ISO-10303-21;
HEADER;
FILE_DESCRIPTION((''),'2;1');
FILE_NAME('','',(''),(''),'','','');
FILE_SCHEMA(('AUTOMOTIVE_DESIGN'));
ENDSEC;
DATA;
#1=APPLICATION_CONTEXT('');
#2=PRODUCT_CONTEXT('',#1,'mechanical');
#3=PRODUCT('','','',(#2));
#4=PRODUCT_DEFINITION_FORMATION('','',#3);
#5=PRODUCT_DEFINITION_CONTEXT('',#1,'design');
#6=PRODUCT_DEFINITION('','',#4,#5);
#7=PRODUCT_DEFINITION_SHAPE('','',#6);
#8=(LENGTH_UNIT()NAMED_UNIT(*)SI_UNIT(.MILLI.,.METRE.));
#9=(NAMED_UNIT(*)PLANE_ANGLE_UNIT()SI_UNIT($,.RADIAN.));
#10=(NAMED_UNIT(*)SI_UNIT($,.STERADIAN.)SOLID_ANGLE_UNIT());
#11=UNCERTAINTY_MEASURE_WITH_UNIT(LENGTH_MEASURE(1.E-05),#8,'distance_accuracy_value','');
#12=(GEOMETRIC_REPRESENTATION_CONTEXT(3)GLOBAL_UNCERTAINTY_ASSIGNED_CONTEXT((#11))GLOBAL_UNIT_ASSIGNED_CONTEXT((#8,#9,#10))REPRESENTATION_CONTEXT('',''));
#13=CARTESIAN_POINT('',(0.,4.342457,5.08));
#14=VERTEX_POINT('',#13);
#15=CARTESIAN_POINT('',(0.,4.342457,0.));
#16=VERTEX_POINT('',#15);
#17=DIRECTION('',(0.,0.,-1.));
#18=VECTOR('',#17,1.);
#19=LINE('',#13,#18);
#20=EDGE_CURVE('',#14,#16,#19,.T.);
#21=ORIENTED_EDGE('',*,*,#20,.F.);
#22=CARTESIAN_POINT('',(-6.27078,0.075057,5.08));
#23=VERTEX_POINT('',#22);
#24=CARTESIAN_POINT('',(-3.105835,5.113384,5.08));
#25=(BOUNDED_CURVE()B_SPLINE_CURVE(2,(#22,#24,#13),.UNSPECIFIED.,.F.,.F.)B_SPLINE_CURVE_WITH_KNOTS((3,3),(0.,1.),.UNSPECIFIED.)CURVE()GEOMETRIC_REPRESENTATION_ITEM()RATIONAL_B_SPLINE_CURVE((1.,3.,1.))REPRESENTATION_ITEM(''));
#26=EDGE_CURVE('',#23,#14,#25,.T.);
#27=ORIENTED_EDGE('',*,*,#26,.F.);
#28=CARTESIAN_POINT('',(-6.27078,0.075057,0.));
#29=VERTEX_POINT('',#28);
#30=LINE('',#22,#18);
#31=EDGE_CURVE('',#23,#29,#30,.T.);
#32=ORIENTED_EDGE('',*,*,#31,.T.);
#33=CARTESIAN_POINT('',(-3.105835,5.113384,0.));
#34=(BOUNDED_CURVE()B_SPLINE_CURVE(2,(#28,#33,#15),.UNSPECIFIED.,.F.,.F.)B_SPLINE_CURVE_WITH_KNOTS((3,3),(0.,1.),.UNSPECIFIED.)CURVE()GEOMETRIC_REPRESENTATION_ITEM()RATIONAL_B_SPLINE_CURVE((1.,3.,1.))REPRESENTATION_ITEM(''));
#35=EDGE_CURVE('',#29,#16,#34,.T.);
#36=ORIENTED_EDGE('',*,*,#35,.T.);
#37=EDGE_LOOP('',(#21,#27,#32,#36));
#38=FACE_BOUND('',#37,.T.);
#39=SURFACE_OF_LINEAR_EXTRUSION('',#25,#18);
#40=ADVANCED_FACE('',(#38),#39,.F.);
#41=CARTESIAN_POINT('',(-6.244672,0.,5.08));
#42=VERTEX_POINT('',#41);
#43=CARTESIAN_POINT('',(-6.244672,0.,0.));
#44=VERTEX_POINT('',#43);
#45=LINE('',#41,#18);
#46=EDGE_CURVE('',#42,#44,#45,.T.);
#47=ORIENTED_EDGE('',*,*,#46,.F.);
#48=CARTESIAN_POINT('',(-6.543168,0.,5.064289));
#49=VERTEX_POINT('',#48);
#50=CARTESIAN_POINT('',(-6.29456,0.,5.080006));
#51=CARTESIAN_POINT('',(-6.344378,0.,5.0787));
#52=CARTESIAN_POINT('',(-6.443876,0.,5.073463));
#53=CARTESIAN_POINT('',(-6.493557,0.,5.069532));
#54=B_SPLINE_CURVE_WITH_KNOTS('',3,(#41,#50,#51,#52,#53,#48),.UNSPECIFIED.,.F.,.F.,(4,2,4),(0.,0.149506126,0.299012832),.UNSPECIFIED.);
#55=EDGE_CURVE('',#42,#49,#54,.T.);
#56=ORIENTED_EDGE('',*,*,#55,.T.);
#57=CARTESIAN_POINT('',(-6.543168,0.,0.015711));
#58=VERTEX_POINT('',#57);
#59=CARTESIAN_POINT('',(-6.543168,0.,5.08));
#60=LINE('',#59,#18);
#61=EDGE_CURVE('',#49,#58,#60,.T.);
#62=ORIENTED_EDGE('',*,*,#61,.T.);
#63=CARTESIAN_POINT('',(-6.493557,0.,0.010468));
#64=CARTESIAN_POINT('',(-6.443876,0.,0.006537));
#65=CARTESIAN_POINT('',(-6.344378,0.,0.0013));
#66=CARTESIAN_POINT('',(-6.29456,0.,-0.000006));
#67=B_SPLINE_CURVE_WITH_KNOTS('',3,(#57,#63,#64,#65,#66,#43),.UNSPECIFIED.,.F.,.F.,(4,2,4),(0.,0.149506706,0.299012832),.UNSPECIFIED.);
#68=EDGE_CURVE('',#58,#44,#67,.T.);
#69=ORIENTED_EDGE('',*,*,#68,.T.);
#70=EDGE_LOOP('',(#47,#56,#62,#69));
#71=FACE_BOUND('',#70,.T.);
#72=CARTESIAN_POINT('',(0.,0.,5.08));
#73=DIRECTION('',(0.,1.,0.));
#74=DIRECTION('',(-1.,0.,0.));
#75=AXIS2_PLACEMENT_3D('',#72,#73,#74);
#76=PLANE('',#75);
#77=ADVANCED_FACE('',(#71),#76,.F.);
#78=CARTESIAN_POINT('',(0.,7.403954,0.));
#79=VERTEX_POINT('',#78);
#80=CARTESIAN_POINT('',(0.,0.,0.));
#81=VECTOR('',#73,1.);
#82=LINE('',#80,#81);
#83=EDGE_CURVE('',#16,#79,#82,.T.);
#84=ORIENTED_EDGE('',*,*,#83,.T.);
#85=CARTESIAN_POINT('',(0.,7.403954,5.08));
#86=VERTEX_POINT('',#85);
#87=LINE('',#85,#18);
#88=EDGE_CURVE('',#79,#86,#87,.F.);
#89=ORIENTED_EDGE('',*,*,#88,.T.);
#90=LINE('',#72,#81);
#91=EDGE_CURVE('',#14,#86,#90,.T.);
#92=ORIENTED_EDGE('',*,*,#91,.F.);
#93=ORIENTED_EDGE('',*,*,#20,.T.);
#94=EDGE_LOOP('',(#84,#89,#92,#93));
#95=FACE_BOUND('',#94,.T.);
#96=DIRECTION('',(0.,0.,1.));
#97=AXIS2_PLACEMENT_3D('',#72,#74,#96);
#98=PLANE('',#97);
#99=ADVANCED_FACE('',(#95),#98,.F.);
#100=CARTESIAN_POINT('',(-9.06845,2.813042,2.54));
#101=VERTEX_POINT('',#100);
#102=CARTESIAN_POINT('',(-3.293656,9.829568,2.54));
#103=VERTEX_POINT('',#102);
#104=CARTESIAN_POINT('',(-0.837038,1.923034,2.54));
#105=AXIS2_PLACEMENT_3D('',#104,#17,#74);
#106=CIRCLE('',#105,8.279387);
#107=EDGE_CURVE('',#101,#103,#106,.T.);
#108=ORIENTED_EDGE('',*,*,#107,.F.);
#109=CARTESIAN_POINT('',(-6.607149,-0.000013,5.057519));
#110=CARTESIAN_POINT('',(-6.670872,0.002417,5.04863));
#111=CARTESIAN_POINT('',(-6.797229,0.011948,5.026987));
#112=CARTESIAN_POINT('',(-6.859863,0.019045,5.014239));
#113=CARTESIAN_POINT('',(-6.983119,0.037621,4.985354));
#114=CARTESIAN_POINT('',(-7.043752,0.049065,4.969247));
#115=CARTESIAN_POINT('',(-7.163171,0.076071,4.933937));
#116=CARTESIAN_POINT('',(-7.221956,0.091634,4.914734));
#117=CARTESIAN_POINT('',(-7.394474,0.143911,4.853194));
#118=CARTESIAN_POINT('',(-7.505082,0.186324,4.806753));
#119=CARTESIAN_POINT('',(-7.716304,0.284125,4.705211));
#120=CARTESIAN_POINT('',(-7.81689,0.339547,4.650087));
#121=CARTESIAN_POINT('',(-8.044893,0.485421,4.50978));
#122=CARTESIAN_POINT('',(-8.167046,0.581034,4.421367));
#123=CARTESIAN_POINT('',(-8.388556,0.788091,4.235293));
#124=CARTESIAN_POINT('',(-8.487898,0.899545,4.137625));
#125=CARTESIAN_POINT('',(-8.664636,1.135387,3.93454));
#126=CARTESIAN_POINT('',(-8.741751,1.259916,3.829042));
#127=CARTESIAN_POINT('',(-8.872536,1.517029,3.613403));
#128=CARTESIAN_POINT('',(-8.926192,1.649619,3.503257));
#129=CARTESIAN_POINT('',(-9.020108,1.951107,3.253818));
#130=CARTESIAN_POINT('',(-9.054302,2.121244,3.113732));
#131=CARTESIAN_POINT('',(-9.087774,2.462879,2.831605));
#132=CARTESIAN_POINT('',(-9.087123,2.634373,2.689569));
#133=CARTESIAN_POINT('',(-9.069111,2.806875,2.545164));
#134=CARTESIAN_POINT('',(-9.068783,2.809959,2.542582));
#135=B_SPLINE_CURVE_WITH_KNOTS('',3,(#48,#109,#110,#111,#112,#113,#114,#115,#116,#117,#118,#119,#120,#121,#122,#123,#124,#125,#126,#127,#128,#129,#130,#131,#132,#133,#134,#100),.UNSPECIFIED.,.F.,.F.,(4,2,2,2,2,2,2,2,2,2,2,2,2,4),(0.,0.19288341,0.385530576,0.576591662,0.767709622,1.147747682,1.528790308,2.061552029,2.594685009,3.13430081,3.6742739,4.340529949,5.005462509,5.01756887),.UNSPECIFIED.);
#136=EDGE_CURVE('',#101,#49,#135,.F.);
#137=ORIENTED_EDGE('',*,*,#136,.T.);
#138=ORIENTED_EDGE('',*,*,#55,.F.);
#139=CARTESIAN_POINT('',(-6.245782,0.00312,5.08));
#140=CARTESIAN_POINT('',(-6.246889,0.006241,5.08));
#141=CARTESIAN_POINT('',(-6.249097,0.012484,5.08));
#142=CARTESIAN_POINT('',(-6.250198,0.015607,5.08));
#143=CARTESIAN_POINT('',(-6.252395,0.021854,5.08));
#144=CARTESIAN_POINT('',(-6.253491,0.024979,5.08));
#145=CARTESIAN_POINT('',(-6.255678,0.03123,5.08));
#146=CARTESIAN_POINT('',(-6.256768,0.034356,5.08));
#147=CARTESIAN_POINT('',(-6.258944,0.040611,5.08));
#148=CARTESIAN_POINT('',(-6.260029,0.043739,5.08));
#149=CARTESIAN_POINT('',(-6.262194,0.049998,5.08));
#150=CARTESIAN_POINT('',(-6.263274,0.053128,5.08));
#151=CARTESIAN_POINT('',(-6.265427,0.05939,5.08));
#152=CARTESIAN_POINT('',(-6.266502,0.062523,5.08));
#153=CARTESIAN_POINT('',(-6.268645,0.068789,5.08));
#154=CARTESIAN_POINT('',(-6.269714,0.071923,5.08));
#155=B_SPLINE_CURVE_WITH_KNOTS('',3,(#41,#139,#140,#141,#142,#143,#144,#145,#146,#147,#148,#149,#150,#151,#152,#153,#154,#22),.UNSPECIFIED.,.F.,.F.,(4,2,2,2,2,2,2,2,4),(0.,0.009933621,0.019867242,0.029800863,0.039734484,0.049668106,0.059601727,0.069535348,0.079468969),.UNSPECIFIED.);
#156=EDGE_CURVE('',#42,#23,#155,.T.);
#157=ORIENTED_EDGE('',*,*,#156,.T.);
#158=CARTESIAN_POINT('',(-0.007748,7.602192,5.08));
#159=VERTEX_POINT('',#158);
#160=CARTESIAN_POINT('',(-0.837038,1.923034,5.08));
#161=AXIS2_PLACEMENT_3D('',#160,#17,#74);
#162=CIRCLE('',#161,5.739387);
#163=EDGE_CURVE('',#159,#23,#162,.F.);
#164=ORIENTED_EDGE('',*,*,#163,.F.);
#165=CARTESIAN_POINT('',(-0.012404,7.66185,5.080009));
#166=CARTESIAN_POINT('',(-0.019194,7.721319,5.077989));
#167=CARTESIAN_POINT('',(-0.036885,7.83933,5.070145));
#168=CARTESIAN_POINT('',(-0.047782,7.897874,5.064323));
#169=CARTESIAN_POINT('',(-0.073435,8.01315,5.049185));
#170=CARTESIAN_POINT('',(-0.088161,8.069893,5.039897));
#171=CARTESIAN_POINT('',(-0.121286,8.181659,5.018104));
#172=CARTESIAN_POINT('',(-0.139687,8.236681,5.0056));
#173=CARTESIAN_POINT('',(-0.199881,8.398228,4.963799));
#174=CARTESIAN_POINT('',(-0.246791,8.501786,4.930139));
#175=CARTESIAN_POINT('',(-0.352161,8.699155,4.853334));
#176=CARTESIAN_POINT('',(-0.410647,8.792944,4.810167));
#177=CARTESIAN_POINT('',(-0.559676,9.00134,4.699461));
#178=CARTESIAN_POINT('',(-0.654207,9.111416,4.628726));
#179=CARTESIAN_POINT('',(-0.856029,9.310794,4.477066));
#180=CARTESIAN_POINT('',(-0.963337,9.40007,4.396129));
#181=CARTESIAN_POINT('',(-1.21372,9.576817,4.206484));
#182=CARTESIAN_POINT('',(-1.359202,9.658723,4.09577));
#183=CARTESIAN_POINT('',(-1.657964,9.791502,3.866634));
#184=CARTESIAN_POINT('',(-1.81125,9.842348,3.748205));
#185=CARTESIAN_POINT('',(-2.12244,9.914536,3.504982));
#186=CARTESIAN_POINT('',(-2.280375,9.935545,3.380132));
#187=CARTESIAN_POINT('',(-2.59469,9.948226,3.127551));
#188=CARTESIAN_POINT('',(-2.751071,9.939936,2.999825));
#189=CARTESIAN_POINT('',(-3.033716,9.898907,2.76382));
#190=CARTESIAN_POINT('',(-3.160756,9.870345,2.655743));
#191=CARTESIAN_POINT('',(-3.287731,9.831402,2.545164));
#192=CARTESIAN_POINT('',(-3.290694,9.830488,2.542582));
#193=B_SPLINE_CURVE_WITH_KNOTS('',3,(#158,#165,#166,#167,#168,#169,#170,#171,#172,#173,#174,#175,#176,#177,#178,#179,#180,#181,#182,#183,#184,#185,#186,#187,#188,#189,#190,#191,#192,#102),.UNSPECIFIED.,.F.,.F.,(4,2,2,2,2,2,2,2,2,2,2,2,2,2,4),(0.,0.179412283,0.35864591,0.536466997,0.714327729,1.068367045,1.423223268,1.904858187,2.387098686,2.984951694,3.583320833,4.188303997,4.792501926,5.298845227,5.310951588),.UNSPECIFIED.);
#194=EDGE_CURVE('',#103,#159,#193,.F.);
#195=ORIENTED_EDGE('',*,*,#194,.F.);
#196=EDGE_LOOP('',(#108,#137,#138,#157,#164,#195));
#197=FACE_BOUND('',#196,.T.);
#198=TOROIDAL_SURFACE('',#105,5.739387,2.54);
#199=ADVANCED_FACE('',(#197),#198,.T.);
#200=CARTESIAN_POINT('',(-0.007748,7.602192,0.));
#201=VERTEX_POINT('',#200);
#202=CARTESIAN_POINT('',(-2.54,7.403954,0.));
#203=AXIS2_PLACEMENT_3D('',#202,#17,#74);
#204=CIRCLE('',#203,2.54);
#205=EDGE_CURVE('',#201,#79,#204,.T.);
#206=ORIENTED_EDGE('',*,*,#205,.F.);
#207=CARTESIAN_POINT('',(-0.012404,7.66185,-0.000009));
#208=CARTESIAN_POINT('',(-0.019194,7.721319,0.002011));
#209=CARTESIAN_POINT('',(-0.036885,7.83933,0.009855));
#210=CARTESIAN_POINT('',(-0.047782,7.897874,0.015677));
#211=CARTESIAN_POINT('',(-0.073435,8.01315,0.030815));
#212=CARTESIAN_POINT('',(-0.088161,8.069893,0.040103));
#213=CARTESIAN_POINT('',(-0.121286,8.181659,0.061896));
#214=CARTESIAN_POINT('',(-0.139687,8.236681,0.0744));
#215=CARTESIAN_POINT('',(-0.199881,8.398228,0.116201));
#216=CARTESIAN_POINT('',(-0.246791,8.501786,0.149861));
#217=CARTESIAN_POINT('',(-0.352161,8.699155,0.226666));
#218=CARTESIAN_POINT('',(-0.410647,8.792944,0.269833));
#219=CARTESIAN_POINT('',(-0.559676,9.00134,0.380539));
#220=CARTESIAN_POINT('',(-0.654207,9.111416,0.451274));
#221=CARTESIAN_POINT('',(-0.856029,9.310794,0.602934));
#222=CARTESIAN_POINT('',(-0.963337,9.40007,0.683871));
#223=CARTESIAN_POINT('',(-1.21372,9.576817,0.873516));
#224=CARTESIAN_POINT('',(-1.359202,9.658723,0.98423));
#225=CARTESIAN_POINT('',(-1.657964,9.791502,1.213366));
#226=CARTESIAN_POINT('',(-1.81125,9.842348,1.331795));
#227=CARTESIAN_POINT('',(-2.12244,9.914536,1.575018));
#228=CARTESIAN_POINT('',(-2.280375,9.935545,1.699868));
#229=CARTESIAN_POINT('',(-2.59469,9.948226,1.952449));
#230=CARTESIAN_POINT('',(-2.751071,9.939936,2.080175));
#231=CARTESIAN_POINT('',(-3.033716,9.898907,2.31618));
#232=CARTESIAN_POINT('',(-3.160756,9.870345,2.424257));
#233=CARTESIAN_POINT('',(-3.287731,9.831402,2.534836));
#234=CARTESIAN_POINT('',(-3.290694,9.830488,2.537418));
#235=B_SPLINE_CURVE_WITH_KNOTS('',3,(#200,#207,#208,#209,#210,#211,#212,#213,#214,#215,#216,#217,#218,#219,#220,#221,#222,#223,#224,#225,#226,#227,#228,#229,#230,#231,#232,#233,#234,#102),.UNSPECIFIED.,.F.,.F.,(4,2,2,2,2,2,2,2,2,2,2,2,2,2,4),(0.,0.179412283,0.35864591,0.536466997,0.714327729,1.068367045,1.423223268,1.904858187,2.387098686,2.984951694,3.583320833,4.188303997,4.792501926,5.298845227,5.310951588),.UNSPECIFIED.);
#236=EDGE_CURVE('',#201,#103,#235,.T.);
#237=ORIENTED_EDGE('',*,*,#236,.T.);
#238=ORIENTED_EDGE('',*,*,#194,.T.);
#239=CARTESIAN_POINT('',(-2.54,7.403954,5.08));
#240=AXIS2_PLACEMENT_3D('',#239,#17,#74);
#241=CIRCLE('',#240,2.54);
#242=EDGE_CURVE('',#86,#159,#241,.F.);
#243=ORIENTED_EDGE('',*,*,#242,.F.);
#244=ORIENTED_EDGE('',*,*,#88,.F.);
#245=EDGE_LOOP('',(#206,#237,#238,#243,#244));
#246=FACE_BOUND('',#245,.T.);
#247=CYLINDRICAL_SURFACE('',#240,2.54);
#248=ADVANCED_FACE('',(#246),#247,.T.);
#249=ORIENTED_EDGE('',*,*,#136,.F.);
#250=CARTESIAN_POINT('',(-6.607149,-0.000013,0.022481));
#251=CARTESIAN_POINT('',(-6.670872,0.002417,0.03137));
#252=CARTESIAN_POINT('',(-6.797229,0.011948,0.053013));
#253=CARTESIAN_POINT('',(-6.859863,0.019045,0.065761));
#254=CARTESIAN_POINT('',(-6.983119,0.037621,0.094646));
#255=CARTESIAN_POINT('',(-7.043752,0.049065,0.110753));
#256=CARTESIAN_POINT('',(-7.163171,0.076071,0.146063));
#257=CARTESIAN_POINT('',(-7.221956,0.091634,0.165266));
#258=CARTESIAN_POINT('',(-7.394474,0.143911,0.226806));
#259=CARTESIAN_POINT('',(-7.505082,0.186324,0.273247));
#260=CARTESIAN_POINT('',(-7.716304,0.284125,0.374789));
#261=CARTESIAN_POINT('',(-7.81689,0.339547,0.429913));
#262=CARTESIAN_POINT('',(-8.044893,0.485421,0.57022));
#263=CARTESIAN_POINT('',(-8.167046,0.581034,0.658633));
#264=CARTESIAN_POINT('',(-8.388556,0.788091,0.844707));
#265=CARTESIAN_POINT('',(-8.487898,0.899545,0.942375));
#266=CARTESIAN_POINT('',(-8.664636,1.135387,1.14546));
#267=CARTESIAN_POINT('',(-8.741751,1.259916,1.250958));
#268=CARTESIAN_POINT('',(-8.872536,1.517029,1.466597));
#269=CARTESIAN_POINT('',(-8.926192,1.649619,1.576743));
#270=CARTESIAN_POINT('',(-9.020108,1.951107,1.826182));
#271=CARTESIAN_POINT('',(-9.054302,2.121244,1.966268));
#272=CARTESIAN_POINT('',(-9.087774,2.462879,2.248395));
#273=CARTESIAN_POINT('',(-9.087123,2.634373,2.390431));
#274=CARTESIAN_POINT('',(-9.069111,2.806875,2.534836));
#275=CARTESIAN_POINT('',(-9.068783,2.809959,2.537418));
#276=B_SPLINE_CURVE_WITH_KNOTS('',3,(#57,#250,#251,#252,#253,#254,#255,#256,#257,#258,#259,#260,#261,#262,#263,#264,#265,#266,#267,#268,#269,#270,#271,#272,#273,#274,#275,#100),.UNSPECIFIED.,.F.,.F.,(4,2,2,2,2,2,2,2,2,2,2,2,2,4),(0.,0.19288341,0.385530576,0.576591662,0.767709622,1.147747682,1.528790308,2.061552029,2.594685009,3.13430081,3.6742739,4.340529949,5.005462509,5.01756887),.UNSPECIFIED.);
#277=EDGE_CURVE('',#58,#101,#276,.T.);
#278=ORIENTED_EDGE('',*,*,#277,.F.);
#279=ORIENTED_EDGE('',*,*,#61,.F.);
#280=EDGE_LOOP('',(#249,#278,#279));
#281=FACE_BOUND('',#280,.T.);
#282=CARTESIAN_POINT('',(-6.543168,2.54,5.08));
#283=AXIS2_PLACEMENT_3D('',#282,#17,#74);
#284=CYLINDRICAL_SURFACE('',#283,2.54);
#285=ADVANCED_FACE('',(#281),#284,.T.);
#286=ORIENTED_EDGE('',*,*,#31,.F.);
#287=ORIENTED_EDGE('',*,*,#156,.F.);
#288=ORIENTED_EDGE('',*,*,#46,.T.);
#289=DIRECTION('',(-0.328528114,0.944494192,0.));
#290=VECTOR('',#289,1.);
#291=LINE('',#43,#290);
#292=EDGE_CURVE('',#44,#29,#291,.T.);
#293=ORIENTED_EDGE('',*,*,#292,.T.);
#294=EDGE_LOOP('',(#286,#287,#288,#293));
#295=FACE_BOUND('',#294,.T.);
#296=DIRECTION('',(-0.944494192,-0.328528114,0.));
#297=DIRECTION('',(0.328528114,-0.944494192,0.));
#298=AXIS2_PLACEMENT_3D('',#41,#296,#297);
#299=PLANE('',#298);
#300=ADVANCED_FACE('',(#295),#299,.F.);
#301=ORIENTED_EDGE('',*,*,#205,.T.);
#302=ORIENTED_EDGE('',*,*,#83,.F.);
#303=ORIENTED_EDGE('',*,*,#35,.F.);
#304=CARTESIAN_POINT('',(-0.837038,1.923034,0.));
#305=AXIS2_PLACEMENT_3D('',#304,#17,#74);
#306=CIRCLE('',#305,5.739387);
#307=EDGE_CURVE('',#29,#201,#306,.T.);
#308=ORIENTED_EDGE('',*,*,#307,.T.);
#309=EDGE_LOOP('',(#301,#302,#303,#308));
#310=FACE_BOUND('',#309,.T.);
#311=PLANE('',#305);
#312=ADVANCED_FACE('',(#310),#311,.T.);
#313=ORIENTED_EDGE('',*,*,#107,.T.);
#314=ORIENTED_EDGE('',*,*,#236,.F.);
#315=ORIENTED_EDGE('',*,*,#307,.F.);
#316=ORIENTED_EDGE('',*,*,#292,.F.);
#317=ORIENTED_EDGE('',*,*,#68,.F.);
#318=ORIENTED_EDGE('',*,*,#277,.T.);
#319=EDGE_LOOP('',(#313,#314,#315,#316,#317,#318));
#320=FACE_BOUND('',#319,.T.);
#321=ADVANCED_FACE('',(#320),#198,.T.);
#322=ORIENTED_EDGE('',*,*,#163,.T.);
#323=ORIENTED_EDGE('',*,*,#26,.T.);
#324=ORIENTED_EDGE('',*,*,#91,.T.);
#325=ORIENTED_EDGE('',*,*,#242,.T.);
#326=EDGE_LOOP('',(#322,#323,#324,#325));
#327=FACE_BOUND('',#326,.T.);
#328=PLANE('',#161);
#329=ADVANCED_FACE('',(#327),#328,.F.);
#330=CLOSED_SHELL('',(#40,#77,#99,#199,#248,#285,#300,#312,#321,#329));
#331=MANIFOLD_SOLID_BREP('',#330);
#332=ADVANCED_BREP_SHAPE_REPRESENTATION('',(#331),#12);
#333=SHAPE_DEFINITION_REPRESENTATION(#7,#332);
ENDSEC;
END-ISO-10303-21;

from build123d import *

# Parameters (mm, degrees)
BOSS_EXTRUDE1_DEPTH = 5.08
FILLET1_R           = 2.54
CUT_EXTRUDE1_DEPTH  = 5.08


with BuildPart() as part:
    # Sketch2 → Boss-Extrude1 (new body)
    with BuildSketch(Plane.XY):
        with BuildLine():
            Line((0, 0), (-8.89, 0))
            ThreePointArc((-8.89, 0), (-7.067912046, 7.37504804), (0, 10.16))
            Line((0, 10.16), (0, 0))
        make_face()
    extrude(amount=BOSS_EXTRUDE1_DEPTH)

    # Fillet1
    fillet1_edges = [part.edges().sort_by_distance(p)[0] for p in [
        (-7.067912046, 7.37504804, 0),
        (-8.89, 0, 2.54),
        (0, 10.16, 2.54),
        (-7.067912046, 7.37504804, 5.08),
    ]]
    fillet(fillet1_edges, radius=FILLET1_R - 0.0001)  # a hair under: the kernel refuses the full size

    # Sketch4 → Cut-Extrude1 (cut)
    with BuildSketch(Plane.XY):
        with BuildLine():
            Line((0, 4.342456755), (0, 0))
            Line((0, 0), (-6.244672338, 0))
            Line((-6.244672338, 0), (-6.270779923, 0.075057389))
            add(Edge.make_bspline(
                [(-6.270779923, 0.075057389), (-3.105835382, 5.113383938), (0, 4.342456755)],
                knots=[0, 0, 0, 1, 1, 1], degree=2, weights=[1, 3, 1]))
        make_face()
    extrude(amount=CUT_EXTRUDE1_DEPTH, mode=Mode.SUBTRACT)


solid = part.part
